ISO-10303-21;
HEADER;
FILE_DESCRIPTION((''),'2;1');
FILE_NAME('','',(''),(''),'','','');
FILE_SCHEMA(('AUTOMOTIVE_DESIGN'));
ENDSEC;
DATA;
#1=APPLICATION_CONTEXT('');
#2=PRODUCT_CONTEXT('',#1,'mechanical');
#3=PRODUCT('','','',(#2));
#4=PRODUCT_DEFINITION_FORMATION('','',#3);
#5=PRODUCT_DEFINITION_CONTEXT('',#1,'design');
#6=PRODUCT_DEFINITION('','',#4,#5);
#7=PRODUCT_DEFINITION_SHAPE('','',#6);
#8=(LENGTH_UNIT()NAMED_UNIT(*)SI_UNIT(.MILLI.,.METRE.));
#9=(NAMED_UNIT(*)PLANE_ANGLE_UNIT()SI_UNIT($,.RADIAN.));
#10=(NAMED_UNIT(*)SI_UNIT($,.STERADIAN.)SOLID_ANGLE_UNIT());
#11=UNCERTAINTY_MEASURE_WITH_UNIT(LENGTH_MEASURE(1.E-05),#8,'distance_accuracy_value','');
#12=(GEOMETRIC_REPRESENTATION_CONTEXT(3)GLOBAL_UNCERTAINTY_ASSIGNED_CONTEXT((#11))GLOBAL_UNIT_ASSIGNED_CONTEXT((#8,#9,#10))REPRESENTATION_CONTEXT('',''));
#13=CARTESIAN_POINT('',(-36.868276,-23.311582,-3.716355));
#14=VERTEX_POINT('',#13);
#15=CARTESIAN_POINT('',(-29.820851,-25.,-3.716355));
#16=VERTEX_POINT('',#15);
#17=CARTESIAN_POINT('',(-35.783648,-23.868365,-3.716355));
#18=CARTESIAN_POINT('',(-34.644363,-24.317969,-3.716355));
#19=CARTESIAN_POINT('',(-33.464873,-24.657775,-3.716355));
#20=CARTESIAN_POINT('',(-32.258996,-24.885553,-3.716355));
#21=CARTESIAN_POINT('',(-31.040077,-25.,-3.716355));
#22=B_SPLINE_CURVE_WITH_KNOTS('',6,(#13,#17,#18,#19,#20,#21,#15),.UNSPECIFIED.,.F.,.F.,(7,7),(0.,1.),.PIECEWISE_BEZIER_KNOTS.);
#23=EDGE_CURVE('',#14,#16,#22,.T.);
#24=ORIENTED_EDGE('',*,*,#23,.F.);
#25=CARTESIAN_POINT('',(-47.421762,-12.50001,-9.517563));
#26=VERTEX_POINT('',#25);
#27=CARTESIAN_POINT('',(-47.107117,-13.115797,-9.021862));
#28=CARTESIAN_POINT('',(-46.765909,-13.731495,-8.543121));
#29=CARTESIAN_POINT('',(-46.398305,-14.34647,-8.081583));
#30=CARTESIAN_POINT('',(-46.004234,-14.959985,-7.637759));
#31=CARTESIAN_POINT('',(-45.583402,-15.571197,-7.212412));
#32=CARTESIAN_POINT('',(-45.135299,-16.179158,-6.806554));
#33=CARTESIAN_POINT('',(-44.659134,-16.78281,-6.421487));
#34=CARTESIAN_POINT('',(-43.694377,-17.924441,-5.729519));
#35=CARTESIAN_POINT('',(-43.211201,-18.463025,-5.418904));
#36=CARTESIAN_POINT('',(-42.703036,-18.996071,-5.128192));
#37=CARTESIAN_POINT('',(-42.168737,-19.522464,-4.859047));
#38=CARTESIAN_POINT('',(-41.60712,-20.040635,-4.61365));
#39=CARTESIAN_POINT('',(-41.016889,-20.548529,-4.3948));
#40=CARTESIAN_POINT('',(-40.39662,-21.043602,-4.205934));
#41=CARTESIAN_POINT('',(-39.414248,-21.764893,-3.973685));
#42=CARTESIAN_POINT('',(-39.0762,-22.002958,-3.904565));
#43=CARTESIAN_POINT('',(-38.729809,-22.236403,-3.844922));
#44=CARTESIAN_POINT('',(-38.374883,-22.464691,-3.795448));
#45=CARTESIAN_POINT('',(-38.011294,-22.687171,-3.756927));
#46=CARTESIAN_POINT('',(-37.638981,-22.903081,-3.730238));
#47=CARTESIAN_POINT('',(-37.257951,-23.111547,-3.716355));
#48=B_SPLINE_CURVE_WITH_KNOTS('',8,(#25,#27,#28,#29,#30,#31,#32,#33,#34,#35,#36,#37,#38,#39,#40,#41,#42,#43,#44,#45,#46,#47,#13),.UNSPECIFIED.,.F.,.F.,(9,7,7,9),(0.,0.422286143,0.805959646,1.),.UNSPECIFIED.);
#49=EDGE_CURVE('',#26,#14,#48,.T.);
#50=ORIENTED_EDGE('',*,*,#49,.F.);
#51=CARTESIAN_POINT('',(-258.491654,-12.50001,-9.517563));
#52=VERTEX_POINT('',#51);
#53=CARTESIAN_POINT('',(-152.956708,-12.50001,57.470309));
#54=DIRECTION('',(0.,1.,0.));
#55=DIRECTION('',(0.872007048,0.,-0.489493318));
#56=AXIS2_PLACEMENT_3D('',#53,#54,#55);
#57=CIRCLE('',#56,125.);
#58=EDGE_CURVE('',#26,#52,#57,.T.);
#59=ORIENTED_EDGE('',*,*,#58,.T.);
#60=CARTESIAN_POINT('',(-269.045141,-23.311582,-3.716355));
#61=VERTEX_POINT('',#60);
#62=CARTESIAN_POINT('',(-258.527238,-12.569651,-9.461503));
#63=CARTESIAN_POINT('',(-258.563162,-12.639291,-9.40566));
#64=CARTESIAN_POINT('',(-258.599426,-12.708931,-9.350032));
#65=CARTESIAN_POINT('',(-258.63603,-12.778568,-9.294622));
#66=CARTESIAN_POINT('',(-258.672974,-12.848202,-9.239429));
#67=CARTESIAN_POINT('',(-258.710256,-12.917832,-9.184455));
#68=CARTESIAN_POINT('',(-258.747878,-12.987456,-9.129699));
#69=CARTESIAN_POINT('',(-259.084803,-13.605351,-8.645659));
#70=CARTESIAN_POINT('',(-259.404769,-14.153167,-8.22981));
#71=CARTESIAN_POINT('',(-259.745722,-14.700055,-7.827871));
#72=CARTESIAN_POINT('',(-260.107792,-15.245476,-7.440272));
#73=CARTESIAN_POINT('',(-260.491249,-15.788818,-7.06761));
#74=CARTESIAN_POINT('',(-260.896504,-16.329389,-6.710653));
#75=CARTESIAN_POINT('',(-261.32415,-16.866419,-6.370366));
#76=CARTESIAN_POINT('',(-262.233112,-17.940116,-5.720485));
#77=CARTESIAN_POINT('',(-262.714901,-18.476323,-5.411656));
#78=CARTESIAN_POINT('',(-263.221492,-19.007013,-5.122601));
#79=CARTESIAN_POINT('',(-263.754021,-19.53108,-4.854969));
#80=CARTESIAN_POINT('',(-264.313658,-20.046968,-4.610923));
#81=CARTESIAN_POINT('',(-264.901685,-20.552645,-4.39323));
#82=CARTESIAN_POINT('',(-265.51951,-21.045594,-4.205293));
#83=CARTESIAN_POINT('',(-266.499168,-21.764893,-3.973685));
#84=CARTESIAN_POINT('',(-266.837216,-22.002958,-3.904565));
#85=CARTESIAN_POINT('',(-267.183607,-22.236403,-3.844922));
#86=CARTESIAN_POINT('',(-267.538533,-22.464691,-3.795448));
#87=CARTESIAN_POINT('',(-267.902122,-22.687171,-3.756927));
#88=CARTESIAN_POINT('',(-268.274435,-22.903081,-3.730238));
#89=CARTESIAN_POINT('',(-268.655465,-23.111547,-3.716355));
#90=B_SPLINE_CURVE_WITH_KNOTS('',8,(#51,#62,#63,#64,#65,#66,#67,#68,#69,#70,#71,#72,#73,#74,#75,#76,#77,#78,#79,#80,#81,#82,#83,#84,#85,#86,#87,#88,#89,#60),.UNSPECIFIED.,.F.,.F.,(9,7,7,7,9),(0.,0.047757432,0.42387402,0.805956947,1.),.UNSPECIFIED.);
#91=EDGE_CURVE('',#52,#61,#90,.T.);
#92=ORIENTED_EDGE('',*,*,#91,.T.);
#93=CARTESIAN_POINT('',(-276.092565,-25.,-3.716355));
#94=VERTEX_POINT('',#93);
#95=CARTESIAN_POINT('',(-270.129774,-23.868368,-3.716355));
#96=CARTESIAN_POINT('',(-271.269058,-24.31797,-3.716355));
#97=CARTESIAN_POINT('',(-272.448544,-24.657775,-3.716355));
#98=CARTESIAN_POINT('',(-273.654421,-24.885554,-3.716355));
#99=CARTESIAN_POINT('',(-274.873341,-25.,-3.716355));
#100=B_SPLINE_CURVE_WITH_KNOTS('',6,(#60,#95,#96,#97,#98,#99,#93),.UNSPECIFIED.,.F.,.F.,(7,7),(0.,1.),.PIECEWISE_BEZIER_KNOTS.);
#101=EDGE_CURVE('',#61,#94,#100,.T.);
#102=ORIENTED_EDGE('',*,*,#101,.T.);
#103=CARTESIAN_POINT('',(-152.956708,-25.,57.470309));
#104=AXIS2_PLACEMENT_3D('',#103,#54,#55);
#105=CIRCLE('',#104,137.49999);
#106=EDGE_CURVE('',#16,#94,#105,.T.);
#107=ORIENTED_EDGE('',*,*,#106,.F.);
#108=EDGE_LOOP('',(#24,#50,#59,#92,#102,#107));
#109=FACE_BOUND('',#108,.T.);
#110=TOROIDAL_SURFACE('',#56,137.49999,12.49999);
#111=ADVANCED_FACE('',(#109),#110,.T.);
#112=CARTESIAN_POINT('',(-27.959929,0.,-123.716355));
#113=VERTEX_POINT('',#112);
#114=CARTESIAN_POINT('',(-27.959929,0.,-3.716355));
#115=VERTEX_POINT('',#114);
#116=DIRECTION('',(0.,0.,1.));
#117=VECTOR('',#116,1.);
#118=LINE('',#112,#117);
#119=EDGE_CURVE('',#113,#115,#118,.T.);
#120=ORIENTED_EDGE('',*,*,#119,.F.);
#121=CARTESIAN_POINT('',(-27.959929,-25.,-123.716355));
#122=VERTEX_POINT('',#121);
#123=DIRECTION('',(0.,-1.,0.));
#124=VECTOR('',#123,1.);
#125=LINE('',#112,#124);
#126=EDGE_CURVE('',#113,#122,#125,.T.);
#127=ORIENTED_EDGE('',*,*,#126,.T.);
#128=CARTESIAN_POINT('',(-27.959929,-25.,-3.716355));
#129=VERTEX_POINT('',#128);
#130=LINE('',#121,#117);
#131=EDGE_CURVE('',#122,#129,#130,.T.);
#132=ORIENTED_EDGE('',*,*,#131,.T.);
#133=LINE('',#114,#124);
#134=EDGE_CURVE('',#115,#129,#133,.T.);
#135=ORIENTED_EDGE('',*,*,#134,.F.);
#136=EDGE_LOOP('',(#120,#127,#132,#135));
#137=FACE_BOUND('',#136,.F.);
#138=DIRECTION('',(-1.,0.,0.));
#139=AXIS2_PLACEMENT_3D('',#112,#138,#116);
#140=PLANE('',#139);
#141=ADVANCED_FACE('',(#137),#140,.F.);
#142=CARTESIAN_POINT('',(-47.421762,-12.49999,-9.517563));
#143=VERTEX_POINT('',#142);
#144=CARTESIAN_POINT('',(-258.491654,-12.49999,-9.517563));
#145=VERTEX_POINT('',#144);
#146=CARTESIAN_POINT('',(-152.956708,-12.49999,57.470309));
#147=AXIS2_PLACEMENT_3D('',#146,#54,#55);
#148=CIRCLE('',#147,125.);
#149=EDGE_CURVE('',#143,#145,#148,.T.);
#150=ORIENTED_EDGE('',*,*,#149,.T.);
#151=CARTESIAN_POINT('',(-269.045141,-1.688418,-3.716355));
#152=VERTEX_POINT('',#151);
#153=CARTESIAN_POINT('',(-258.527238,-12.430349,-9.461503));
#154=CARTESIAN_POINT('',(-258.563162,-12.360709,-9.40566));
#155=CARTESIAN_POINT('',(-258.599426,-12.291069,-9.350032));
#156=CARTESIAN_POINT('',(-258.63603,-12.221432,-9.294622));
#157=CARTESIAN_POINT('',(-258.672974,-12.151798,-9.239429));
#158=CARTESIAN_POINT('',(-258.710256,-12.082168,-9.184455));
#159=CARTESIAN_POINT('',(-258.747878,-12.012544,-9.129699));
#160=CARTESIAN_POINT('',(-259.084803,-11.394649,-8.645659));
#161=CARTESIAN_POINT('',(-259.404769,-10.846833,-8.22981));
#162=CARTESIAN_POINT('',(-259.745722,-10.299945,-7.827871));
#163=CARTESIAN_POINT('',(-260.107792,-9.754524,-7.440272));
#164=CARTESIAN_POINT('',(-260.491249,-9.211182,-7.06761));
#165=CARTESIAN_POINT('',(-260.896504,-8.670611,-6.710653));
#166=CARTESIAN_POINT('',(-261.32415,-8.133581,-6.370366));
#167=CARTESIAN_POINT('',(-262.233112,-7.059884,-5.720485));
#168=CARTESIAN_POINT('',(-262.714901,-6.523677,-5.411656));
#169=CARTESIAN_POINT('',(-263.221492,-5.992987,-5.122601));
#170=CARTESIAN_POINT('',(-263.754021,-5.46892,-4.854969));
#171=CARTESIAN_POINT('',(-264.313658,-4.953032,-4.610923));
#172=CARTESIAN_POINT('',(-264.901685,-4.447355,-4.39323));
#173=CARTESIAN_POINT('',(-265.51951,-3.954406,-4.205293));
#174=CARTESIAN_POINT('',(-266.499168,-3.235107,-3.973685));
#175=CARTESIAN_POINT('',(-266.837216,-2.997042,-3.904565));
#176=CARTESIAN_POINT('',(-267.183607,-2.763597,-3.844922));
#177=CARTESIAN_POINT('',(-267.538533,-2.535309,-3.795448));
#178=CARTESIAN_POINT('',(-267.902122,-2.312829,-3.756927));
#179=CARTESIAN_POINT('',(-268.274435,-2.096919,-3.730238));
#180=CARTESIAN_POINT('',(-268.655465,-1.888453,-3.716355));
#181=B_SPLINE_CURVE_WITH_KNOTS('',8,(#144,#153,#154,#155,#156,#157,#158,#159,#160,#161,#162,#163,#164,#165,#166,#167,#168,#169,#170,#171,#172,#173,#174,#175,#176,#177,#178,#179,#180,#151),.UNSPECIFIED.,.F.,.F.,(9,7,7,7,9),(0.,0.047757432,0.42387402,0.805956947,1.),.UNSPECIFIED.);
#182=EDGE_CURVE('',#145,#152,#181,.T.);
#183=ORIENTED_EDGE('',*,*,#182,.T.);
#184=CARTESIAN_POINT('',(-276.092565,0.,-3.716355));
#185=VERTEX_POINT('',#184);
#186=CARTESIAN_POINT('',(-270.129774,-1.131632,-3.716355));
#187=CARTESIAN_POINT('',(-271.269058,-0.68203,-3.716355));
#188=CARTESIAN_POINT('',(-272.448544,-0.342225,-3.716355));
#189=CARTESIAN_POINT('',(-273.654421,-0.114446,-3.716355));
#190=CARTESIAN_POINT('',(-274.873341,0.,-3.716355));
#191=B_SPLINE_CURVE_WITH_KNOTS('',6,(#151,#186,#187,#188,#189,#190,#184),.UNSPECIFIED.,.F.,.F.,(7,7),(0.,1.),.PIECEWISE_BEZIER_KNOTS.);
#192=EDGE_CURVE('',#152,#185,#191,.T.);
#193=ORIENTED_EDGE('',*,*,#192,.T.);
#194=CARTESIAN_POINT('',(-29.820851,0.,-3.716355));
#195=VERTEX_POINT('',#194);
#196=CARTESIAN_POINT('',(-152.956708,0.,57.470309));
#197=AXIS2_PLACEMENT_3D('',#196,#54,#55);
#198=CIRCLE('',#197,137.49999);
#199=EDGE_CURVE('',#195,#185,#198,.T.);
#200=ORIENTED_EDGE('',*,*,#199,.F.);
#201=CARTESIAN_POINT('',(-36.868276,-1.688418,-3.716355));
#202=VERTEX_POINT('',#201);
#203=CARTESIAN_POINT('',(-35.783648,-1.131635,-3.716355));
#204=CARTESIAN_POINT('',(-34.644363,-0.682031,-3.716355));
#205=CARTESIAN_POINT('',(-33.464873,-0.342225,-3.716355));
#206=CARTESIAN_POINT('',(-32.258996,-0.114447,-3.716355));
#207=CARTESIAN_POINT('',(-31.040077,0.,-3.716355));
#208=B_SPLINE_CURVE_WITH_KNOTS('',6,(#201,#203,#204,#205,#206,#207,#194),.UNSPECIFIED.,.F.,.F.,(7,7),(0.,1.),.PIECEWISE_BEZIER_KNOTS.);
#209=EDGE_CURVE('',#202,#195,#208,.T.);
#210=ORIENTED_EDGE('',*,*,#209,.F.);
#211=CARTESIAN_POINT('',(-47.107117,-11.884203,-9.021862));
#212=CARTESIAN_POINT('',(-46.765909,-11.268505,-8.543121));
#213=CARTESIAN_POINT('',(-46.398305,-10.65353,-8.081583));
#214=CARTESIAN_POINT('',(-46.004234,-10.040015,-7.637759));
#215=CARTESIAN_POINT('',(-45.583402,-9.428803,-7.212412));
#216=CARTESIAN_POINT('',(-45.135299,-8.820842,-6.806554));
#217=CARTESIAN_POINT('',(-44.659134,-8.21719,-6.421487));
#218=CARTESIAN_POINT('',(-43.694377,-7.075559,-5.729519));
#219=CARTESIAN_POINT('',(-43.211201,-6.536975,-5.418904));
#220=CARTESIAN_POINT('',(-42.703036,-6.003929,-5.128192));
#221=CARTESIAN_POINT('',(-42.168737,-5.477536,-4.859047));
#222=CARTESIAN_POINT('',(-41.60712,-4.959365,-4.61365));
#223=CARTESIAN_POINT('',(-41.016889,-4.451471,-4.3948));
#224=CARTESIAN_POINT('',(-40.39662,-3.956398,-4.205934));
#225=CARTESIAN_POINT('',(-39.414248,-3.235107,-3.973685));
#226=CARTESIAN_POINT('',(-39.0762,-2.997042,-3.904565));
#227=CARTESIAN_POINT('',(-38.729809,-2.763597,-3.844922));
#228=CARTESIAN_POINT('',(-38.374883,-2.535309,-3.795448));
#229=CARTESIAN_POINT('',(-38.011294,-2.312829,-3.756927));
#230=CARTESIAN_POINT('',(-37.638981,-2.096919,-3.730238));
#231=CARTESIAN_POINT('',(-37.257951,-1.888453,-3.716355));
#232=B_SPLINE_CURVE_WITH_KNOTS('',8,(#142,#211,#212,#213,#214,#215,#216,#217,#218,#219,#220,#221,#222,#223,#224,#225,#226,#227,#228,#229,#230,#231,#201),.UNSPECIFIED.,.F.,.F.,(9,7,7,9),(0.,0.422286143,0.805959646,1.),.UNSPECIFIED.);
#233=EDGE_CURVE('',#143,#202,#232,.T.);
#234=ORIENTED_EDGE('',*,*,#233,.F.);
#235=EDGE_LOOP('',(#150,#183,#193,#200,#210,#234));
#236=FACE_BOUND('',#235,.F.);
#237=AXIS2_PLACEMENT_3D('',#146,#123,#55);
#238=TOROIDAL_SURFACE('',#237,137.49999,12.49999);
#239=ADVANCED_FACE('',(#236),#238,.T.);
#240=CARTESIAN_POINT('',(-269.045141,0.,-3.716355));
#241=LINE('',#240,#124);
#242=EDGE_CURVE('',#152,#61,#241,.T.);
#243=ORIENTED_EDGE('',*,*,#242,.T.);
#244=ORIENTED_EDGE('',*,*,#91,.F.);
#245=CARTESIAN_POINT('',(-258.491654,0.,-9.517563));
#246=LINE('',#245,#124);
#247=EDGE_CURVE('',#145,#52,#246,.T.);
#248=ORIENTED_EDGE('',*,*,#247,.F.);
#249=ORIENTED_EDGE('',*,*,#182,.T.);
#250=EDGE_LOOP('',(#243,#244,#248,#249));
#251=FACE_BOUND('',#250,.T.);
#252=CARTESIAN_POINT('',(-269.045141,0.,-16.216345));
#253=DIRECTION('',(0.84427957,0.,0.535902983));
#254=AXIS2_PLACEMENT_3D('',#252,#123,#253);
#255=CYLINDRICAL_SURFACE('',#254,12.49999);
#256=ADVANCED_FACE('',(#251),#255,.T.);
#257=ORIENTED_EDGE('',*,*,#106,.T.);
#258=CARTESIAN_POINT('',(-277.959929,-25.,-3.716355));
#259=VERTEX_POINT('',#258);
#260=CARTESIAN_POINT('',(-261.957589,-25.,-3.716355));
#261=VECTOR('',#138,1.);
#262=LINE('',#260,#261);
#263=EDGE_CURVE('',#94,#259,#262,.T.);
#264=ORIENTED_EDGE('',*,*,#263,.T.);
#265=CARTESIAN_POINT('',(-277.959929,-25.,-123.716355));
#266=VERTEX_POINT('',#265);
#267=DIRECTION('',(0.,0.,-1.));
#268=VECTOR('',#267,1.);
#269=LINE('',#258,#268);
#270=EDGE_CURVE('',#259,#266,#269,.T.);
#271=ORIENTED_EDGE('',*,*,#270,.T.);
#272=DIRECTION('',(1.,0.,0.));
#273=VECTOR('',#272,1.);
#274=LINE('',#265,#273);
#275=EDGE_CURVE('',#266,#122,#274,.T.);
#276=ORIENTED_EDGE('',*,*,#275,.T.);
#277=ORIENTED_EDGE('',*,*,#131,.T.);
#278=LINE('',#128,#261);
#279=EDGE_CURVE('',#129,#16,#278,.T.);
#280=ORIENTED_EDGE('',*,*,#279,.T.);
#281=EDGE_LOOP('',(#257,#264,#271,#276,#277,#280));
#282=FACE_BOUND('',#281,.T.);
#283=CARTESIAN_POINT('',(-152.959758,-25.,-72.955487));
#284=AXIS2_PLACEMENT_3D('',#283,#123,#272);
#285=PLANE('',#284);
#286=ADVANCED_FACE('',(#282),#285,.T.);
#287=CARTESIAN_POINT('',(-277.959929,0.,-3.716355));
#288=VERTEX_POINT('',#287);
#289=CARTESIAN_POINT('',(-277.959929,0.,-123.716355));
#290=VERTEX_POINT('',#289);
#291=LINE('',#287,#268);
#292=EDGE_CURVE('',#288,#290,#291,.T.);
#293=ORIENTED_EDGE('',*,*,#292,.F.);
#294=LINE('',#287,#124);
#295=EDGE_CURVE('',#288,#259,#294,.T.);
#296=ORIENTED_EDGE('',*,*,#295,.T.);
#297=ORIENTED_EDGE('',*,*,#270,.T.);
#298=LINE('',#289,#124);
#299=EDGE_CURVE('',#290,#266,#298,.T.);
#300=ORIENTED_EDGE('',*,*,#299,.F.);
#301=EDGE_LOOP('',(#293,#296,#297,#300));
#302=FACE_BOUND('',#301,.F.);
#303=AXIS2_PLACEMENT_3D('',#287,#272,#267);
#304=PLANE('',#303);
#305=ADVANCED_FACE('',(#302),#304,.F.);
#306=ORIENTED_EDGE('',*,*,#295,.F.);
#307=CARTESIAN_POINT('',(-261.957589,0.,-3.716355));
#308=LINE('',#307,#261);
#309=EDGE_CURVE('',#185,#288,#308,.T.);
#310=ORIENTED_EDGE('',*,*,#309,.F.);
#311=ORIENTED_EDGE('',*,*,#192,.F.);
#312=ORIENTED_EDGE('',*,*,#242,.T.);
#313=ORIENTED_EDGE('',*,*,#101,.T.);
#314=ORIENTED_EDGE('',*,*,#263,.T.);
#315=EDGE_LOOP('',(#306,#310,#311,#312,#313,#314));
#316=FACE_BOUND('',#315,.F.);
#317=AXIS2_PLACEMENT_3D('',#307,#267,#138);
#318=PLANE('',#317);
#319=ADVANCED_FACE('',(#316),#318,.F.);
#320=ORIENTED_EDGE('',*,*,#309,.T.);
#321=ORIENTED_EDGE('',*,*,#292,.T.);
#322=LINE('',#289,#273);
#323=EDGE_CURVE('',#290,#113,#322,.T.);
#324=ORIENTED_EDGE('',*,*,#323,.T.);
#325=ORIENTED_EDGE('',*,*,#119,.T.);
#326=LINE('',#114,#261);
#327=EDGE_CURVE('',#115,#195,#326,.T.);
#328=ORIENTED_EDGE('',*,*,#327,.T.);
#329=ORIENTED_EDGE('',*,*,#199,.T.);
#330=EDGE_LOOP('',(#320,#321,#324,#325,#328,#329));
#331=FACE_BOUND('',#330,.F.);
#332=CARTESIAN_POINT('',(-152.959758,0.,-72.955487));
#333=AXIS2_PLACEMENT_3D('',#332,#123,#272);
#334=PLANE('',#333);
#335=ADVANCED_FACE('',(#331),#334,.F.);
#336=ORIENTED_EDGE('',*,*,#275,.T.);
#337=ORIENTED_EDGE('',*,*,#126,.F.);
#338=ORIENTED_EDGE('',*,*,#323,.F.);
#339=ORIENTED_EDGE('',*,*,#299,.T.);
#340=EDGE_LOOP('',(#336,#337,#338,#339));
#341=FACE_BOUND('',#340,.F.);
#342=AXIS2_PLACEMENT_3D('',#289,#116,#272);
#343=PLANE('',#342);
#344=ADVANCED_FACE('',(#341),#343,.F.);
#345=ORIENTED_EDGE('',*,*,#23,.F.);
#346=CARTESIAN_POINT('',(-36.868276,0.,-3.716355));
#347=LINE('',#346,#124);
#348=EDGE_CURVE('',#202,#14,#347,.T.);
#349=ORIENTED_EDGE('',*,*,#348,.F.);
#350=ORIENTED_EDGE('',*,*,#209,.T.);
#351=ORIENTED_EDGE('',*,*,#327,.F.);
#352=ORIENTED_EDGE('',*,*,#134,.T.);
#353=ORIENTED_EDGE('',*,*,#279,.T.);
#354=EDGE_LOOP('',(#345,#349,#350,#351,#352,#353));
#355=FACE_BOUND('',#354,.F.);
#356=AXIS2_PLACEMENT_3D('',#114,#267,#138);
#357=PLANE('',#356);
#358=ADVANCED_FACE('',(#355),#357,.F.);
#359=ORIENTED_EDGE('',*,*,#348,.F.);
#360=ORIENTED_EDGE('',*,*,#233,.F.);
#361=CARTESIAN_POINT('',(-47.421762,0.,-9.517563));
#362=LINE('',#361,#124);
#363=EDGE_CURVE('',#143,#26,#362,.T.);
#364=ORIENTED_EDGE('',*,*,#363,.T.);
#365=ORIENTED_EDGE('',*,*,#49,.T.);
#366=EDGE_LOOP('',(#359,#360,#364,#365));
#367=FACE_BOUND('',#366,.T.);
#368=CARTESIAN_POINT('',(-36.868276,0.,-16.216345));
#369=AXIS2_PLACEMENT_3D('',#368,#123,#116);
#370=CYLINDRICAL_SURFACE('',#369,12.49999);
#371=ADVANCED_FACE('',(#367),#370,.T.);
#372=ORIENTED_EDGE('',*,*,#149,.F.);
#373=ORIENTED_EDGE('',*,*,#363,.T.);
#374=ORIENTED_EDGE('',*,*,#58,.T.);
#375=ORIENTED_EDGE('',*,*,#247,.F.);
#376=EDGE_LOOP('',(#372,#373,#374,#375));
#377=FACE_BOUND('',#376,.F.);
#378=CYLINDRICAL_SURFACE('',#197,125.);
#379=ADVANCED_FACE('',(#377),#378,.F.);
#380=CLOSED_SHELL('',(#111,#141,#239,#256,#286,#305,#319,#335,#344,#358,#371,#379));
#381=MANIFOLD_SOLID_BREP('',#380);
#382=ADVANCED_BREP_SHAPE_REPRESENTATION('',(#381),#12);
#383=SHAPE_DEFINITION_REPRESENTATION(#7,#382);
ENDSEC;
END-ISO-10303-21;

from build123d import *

# Parameters (mm, degrees)
F1_DEPTH = 25
F2_R     = 12.49999


# Not quite as in the source:
# - a fillet or chamfer is up to 0.001 mm smaller than in the source, because OpenCascade refuses the exact size


with BuildPart() as f1:
    # F0 (on Front) → F1 (new body)
    with BuildSketch(Plane.XZ):
        with BuildLine():
            Line((-277.959928672, -3.7163552741), (-277.959928672, -123.7163552741))
            Line((-277.959928672, -123.7163552741), (-27.959928672, -123.7163552741))
            Line((-27.959928672, -123.7163552741), (-27.959928672, -3.7163552741))
            Line((-27.959928672, -3.7163552741), (-43.9558270226, -3.7163552741))
            ThreePointArc((-43.9558270226, -3.7163552741), (-152.9567080066, -67.529690512), (-261.9575889906, -3.7163552741))
            Line((-261.9575889906, -3.7163552741), (-277.959928672, -3.7163552741))
        make_face()
    extrude(amount=F1_DEPTH)

    # F2 (radius 12.5 in the source; OpenCascade refuses exactly that, so slightly less here)
    f2_edges = [f1.edges().sort_by_distance(p)[0] for p in [
        (-261.957589, -12.5, -3.716355),
        (-43.955827, -12.5, -3.716355),
        (-152.956708, -25, -67.529691),
        (-152.956708, 0, -67.529691),
    ]]
    fillet(f2_edges, radius=F2_R)


solid = f1.part
